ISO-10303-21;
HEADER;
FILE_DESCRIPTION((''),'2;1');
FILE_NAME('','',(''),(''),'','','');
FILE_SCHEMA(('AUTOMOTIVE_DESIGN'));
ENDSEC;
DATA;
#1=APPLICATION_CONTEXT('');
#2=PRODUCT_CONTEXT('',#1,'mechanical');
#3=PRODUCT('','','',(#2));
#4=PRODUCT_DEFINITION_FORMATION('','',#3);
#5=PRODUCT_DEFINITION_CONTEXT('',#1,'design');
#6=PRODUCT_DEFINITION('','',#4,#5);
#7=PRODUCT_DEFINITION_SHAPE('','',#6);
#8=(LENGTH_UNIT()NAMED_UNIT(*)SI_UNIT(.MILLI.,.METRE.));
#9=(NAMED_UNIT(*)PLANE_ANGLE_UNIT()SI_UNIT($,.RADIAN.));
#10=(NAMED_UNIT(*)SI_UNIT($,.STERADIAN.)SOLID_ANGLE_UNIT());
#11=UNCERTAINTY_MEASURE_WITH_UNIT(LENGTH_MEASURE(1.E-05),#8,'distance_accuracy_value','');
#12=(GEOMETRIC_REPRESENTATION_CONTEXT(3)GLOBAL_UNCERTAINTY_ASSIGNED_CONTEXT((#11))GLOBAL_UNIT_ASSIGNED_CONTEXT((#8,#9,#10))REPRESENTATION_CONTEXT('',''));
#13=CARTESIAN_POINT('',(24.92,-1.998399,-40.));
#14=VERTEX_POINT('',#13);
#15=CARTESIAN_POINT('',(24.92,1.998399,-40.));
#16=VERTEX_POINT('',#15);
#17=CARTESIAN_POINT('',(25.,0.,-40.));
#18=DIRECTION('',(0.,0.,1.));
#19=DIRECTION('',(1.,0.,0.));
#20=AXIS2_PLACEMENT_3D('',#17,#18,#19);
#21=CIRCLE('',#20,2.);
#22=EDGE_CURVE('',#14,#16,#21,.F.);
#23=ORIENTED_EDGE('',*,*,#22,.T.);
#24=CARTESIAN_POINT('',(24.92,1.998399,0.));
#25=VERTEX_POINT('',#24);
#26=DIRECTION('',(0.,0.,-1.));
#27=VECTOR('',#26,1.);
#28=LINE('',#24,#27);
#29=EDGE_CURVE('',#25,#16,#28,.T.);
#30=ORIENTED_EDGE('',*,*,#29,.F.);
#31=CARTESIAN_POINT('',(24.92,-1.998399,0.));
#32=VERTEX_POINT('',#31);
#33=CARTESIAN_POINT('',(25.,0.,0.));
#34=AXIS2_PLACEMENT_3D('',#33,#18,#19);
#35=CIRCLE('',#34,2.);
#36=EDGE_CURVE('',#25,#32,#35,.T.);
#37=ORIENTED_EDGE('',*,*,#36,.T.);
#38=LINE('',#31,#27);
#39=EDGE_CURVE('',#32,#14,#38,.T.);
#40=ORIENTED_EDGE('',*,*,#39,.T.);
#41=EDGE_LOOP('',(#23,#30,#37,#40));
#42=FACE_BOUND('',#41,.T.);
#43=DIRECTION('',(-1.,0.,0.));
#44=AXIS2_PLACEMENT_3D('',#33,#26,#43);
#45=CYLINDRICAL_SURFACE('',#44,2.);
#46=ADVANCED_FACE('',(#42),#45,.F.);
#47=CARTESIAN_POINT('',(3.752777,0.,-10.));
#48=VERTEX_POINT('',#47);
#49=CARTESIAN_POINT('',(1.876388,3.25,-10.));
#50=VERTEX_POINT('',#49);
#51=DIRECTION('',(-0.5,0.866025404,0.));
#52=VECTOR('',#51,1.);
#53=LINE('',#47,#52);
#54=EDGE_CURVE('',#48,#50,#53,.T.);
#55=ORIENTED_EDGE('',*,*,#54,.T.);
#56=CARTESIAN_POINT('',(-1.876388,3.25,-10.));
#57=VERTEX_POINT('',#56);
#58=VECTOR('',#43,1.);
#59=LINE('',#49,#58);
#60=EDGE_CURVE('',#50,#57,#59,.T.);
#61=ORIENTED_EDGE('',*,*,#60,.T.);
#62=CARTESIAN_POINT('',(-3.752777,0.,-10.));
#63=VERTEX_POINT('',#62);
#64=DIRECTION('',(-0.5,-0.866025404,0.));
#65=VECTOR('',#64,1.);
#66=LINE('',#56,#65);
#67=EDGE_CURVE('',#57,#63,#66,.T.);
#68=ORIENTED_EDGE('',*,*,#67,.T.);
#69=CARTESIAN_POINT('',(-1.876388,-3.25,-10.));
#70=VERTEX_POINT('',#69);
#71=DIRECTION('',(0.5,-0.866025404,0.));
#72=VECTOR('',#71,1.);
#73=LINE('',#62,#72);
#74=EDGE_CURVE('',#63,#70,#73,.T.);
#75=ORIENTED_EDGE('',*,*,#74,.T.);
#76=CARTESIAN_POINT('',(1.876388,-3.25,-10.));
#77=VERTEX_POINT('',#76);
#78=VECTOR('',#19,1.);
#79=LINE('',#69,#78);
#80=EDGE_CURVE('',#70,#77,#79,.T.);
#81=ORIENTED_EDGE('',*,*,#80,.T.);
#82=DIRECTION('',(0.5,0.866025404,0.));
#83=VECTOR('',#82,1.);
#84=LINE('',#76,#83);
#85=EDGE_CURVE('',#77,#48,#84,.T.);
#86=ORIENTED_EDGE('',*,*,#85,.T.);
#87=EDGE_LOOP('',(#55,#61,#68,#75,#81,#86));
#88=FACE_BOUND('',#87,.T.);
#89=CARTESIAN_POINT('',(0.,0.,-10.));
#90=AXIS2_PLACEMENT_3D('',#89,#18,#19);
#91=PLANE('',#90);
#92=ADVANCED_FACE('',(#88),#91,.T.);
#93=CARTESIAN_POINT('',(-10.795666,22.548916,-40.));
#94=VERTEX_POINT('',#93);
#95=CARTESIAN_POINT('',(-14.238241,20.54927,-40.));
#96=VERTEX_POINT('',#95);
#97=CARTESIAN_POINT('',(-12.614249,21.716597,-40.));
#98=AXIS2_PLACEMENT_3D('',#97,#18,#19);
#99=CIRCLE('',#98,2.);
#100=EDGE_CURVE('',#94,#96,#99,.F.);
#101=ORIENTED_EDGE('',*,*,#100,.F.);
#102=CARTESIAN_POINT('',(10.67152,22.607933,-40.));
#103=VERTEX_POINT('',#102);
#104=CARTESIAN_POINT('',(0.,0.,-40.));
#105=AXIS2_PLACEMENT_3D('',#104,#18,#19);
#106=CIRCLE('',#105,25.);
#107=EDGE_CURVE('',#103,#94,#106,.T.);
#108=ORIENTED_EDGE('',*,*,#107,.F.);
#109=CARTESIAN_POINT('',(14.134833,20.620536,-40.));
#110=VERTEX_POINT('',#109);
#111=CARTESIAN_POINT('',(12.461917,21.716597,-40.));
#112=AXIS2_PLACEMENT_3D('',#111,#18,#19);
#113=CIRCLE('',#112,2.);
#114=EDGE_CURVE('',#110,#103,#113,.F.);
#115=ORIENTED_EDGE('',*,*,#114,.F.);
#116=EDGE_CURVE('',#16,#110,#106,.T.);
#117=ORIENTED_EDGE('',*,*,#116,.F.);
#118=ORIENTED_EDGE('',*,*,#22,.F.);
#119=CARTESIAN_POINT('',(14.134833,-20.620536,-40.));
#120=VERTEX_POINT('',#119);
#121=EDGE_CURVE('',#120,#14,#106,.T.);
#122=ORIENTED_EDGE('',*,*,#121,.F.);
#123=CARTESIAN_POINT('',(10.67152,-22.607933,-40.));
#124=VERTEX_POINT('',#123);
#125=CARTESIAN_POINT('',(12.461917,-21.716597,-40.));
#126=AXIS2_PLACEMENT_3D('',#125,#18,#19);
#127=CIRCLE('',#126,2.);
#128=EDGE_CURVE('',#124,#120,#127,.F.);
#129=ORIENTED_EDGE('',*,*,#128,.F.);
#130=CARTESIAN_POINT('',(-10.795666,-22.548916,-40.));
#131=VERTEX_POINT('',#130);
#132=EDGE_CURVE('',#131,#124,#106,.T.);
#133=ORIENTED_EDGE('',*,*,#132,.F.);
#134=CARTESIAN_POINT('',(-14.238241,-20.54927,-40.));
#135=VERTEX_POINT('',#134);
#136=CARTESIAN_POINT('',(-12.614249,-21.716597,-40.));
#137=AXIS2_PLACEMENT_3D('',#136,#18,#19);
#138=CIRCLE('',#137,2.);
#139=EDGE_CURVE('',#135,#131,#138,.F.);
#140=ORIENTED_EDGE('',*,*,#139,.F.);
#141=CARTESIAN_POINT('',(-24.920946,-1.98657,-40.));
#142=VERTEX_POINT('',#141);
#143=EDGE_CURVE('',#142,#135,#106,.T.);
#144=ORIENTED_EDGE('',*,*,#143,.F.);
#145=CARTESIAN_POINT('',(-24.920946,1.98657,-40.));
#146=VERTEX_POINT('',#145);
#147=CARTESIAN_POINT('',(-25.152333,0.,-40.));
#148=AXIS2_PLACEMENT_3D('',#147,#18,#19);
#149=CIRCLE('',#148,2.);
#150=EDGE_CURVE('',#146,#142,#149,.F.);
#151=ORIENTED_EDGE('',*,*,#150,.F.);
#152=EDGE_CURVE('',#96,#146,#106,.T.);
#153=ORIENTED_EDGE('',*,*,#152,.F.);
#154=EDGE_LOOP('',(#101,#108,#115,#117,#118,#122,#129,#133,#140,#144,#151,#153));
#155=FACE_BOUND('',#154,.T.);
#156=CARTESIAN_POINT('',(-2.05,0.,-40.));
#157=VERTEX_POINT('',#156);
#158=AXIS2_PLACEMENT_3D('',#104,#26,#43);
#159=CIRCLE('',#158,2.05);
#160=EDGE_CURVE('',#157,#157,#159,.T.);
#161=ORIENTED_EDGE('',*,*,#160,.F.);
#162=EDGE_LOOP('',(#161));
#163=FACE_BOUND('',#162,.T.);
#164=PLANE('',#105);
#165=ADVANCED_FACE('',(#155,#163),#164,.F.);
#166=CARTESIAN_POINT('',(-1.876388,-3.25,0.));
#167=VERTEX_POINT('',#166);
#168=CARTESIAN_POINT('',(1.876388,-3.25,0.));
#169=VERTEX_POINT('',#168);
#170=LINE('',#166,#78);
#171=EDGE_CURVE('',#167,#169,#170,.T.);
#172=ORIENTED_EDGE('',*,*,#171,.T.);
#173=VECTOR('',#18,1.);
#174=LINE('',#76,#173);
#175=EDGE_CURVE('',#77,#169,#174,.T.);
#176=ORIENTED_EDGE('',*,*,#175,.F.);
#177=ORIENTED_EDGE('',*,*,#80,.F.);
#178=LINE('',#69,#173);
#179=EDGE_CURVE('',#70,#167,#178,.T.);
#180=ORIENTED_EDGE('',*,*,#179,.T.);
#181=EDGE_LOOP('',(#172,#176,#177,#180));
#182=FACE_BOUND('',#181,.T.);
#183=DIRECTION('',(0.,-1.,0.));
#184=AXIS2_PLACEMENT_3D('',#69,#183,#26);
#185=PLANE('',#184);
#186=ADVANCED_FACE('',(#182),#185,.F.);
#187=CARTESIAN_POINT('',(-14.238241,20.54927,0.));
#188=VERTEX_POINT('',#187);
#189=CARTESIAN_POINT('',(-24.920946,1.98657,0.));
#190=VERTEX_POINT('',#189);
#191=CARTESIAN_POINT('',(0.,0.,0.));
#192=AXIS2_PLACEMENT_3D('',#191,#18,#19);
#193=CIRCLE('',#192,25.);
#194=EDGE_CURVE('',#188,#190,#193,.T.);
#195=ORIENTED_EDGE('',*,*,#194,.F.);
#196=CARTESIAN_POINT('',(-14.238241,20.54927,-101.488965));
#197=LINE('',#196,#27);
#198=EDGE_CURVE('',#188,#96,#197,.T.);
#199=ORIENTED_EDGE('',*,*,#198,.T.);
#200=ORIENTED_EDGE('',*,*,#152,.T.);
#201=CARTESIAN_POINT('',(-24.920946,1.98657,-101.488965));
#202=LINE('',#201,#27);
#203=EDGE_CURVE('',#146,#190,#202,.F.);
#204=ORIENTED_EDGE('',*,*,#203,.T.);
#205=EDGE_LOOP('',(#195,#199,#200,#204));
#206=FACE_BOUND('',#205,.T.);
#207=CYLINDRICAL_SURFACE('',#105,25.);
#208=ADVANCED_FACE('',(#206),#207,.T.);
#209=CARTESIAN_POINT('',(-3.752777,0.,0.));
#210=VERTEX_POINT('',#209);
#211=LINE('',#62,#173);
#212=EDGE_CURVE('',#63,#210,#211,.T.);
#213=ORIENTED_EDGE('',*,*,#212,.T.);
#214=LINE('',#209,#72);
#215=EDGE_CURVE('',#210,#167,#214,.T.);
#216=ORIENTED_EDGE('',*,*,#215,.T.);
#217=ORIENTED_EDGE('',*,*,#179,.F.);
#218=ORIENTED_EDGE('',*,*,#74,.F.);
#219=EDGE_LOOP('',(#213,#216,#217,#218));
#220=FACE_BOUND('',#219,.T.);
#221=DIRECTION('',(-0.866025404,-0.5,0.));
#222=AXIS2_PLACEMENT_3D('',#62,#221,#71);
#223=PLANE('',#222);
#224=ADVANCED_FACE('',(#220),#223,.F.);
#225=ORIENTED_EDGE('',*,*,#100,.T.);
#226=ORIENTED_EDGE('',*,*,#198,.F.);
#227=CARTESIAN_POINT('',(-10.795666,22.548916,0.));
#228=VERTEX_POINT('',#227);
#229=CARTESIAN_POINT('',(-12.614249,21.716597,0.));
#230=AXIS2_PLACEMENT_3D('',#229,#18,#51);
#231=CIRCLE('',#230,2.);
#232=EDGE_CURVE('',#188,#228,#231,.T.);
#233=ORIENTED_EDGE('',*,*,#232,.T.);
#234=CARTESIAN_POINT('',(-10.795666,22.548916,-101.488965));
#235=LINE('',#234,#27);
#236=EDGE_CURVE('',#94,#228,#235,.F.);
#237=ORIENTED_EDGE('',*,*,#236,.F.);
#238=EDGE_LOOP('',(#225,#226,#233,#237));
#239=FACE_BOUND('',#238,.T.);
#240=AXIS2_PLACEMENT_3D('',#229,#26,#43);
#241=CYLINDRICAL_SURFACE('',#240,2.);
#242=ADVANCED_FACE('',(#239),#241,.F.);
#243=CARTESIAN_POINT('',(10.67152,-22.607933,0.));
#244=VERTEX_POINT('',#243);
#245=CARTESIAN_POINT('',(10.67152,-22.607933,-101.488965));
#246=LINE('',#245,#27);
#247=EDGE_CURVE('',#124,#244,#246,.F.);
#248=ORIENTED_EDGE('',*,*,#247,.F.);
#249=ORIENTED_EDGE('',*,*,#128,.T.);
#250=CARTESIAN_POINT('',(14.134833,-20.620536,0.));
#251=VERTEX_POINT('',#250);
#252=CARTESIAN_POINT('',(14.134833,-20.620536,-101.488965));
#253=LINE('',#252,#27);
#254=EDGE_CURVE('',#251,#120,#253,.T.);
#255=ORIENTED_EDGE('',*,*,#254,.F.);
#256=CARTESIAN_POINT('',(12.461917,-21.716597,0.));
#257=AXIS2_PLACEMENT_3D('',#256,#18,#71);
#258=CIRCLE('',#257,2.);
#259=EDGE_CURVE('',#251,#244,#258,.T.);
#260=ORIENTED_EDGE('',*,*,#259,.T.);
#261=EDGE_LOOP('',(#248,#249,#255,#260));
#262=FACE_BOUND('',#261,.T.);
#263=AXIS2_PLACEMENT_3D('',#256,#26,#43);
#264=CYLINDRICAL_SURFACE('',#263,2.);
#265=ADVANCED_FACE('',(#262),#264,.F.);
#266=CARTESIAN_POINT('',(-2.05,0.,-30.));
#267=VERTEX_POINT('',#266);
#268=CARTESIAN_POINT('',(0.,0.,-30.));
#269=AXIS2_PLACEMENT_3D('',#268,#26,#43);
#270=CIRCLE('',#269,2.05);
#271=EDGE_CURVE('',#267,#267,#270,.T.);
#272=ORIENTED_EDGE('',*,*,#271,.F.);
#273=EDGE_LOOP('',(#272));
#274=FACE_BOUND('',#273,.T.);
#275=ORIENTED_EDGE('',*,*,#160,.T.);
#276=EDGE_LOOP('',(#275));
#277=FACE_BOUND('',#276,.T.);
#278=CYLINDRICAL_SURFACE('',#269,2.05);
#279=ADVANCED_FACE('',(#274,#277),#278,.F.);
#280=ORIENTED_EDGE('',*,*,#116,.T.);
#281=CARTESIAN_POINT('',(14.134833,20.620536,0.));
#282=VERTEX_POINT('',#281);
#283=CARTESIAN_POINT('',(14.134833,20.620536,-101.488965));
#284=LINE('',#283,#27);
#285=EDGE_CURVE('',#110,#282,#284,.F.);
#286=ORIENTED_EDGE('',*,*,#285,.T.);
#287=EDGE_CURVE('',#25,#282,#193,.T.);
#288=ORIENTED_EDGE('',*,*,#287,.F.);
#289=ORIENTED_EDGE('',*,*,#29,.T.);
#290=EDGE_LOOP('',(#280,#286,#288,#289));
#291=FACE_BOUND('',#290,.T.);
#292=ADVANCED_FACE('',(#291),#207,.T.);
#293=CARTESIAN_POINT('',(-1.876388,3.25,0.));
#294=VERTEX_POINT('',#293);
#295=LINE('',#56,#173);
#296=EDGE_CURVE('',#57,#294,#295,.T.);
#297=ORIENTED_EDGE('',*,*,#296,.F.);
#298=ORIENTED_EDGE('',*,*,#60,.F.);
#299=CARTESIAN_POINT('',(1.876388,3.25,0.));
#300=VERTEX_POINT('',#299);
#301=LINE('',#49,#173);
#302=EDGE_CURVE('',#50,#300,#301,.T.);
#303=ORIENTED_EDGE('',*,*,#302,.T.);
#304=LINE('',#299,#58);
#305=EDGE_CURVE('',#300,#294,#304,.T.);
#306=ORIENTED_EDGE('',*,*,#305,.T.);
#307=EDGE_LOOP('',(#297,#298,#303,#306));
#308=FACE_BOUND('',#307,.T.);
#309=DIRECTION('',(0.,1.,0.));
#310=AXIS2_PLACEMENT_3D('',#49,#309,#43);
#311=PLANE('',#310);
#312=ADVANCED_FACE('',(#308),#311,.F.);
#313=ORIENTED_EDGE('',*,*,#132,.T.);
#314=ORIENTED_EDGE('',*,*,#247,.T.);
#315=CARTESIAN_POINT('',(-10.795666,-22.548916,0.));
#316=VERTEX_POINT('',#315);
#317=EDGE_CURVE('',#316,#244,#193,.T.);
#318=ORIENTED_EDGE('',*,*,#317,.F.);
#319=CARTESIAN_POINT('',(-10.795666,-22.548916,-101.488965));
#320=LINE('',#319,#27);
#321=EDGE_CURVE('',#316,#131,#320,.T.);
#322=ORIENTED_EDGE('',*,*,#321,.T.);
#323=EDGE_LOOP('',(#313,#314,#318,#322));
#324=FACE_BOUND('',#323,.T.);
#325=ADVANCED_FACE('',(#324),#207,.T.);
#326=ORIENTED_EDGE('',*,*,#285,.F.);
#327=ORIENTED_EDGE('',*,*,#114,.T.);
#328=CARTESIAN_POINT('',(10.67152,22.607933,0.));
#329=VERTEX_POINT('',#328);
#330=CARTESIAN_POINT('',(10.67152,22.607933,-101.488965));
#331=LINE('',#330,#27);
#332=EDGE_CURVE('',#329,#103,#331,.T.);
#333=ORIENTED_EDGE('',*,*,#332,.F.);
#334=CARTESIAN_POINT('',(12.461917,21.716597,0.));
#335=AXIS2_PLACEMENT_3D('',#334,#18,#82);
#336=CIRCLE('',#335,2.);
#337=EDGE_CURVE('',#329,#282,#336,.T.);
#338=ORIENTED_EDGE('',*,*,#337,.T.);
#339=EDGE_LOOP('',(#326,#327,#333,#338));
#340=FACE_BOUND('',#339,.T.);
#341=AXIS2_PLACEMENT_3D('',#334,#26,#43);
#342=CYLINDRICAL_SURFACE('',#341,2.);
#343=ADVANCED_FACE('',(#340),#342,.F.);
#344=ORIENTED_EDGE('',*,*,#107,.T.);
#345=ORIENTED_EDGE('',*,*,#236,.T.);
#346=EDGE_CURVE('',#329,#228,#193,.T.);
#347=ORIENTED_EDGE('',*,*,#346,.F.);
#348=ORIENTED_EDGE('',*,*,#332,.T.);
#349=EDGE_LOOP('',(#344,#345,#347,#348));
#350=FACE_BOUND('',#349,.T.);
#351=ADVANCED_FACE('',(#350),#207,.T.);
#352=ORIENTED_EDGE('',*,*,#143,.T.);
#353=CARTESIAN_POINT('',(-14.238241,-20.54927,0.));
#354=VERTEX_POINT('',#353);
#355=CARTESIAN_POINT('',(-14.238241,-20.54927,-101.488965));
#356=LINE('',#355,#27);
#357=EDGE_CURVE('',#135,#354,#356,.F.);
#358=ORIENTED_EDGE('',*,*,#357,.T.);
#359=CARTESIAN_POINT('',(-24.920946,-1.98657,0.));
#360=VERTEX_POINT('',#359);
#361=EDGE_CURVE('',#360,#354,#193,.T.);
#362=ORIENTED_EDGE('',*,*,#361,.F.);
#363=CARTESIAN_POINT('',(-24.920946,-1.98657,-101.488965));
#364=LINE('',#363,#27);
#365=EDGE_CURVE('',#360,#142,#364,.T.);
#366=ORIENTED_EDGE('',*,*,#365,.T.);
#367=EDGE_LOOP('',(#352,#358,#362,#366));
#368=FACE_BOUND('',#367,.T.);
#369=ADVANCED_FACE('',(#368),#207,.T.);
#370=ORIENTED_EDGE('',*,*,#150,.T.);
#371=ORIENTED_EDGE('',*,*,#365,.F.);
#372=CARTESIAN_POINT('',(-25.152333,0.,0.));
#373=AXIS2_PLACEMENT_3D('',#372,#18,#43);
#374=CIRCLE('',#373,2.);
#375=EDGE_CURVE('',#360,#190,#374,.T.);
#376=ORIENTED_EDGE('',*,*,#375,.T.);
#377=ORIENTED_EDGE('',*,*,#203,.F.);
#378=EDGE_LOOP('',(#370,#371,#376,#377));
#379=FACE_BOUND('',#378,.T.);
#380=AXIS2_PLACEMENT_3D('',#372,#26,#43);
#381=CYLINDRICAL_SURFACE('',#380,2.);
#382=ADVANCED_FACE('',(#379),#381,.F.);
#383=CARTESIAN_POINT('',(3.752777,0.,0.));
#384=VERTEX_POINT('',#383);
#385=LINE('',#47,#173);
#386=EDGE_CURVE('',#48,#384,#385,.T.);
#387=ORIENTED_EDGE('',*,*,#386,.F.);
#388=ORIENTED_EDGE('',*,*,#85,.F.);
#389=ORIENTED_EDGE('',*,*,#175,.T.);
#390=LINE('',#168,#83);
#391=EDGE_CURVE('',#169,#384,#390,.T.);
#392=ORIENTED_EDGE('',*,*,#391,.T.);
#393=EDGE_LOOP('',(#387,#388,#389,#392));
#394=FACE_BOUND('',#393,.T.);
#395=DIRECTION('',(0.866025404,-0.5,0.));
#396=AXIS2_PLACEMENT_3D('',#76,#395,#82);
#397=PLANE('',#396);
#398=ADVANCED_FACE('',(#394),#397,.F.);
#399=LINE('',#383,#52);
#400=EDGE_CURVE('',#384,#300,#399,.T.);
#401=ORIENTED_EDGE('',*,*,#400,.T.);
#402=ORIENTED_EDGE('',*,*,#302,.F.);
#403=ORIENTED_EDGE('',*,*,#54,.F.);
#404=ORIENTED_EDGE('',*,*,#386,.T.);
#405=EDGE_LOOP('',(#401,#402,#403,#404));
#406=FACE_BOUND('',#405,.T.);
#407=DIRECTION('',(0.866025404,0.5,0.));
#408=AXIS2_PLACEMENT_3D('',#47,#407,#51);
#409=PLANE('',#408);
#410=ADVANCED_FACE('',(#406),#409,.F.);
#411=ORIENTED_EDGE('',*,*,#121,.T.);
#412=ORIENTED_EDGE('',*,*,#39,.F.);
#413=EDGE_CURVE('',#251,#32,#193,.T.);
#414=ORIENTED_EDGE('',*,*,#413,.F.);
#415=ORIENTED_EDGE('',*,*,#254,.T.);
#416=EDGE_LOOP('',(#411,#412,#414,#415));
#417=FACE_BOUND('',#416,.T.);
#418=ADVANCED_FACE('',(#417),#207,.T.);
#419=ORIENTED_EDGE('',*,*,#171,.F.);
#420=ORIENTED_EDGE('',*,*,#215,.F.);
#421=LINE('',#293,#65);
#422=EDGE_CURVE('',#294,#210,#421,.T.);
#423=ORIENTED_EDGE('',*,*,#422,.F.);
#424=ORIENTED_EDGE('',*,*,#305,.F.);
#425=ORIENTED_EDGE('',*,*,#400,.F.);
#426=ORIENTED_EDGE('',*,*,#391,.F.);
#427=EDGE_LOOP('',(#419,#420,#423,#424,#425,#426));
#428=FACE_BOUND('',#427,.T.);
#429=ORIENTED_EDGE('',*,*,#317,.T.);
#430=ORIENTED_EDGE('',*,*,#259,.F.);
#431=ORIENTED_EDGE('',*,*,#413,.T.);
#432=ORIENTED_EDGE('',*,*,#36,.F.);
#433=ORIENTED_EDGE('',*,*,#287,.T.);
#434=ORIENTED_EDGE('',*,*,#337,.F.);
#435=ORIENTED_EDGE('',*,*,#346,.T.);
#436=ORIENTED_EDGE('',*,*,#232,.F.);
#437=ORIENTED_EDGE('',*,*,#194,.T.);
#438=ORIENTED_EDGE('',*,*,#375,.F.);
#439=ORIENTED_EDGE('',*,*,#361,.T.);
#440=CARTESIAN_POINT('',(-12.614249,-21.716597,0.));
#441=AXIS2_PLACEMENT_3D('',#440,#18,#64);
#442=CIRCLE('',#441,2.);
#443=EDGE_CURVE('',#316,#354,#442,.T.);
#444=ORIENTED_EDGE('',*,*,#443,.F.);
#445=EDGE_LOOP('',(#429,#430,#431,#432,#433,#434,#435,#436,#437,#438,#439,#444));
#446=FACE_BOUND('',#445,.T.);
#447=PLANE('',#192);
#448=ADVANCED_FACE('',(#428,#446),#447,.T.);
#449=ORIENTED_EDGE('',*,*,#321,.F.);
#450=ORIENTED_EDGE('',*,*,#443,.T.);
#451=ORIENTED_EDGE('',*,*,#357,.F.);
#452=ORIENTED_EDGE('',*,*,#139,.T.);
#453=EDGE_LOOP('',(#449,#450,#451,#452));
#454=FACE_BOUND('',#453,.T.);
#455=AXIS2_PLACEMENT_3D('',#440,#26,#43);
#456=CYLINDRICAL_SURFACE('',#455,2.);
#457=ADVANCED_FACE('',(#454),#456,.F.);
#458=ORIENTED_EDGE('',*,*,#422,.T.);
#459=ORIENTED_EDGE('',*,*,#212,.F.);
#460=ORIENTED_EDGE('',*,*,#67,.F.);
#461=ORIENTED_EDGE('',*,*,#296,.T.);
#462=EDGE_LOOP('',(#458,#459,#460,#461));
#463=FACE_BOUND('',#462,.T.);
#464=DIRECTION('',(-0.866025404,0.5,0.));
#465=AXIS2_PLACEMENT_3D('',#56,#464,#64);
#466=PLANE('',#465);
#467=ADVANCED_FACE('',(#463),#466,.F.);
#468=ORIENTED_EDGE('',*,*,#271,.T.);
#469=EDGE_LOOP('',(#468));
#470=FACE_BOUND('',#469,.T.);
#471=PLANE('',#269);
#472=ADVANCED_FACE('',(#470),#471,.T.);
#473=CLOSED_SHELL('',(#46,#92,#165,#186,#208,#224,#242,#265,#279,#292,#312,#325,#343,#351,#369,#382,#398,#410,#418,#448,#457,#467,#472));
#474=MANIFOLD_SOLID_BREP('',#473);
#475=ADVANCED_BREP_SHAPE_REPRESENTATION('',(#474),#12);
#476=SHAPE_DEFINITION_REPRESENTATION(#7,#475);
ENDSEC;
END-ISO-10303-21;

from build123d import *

# Parameters (mm, degrees)
SKETCH1_R           = 25
BOSS_EXTRUDE1_DEPTH = 40
CUT_EXTRUDE1_DEPTH  = 54.38539126
CIRPATTERN1_START   = -40
CIRPATTERN1_DEPTH   = 40
CUT_EXTRUDE2_DEPTH  = 10
SKETCH4_R           = 2.05
CUT_EXTRUDE3_DEPTH  = 10


# Read off the part's stored shape, not the designer's step: CirPattern1
with BuildPart() as part:
    # Sketch1 → Boss-Extrude1 (new body)
    with BuildSketch(Plane.XY):
        Circle(SKETCH1_R)
    extrude(amount=-BOSS_EXTRUDE1_DEPTH)

    # Sketch2 → Cut-Extrude1 (cut, through all)
    with BuildSketch(Plane.XY):
        with BuildLine():
            Line((148.327454228, 6.938651312), (24.92, 1.998399359))
            ThreePointArc((24.92, 1.998399359), (23, 0), (24.92, -1.998399359))
            Line((24.92, -1.998399359), (148.327454228, -6.938651312))
            Line((148.327454228, -6.938651312), (395.340051868, -6.938651312))
            Line((395.340051868, -6.938651312), (395.340051868, 6.938651312))
            Line((395.340051868, 6.938651312), (148.327454228, 6.938651312))
        make_face()
    extrude(amount=-CUT_EXTRUDE1_DEPTH, mode=Mode.SUBTRACT)

    # CirPattern1 outline → CirPattern1 (cut)
    with BuildSketch(Plane.XY.offset(CIRPATTERN1_START)):
        with BuildLine():
            ThreePointArc((14.134833251, -20.620535613), (11.466483325, -19.981917804), (10.671520375, -22.607933406))
            ThreePointArc((10.671520375, -22.607933406), (12.442918972, -21.683490666), (14.134833251, -20.620535613))
        make_face()
        with BuildLine():
            ThreePointArc((-10.795666007, -22.548915616), (-11.609703747, -19.987178691), (-14.238240755, -20.549270065))
            ThreePointArc((-14.238240755, -20.549270065), (-12.556821553, -21.617729586), (-10.795666007, -22.548915616))
        make_face()
        with BuildLine():
            ThreePointArc((-24.920945806, -1.986569943), (-23.152332628, 0), (-24.920945806, 1.986569943))
            ThreePointArc((-24.920945806, 1.986569943), (-25, 0), (-24.920945806, -1.986569943))
        make_face()
        with BuildLine():
            ThreePointArc((-14.238240755, 20.549270065), (-11.609703747, 19.987178691), (-10.795666007, 22.548915616))
            ThreePointArc((-10.795666007, 22.548915616), (-12.556821553, 21.617729586), (-14.238240755, 20.549270065))
        make_face()
        with BuildLine():
            ThreePointArc((10.671520375, 22.607933406), (11.466483325, 19.981917804), (14.134833251, 20.620535613))
            ThreePointArc((14.134833251, 20.620535613), (12.442918972, 21.683490666), (10.671520375, 22.607933406))
        make_face()
    extrude(amount=CIRPATTERN1_DEPTH, mode=Mode.SUBTRACT)

    # Sketch3 → Cut-Extrude2 (cut)
    with BuildSketch(Plane.XY):
        Polygon((3.75277675, 0), (1.876388375, 3.25), (-1.876388375, 3.25), (-3.75277675, 0), (-1.876388375, -3.25), (1.876388375, -3.25), align=None)
    extrude(amount=-CUT_EXTRUDE2_DEPTH, mode=Mode.SUBTRACT)

    # Sketch4 → Cut-Extrude3 (cut)
    with BuildSketch(Plane(origin=(0, 0, -40), x_dir=(-1, 0, 0), z_dir=(0, 0, -1))):
        Circle(SKETCH4_R)
    extrude(amount=-CUT_EXTRUDE3_DEPTH, mode=Mode.SUBTRACT)


solid = part.part
